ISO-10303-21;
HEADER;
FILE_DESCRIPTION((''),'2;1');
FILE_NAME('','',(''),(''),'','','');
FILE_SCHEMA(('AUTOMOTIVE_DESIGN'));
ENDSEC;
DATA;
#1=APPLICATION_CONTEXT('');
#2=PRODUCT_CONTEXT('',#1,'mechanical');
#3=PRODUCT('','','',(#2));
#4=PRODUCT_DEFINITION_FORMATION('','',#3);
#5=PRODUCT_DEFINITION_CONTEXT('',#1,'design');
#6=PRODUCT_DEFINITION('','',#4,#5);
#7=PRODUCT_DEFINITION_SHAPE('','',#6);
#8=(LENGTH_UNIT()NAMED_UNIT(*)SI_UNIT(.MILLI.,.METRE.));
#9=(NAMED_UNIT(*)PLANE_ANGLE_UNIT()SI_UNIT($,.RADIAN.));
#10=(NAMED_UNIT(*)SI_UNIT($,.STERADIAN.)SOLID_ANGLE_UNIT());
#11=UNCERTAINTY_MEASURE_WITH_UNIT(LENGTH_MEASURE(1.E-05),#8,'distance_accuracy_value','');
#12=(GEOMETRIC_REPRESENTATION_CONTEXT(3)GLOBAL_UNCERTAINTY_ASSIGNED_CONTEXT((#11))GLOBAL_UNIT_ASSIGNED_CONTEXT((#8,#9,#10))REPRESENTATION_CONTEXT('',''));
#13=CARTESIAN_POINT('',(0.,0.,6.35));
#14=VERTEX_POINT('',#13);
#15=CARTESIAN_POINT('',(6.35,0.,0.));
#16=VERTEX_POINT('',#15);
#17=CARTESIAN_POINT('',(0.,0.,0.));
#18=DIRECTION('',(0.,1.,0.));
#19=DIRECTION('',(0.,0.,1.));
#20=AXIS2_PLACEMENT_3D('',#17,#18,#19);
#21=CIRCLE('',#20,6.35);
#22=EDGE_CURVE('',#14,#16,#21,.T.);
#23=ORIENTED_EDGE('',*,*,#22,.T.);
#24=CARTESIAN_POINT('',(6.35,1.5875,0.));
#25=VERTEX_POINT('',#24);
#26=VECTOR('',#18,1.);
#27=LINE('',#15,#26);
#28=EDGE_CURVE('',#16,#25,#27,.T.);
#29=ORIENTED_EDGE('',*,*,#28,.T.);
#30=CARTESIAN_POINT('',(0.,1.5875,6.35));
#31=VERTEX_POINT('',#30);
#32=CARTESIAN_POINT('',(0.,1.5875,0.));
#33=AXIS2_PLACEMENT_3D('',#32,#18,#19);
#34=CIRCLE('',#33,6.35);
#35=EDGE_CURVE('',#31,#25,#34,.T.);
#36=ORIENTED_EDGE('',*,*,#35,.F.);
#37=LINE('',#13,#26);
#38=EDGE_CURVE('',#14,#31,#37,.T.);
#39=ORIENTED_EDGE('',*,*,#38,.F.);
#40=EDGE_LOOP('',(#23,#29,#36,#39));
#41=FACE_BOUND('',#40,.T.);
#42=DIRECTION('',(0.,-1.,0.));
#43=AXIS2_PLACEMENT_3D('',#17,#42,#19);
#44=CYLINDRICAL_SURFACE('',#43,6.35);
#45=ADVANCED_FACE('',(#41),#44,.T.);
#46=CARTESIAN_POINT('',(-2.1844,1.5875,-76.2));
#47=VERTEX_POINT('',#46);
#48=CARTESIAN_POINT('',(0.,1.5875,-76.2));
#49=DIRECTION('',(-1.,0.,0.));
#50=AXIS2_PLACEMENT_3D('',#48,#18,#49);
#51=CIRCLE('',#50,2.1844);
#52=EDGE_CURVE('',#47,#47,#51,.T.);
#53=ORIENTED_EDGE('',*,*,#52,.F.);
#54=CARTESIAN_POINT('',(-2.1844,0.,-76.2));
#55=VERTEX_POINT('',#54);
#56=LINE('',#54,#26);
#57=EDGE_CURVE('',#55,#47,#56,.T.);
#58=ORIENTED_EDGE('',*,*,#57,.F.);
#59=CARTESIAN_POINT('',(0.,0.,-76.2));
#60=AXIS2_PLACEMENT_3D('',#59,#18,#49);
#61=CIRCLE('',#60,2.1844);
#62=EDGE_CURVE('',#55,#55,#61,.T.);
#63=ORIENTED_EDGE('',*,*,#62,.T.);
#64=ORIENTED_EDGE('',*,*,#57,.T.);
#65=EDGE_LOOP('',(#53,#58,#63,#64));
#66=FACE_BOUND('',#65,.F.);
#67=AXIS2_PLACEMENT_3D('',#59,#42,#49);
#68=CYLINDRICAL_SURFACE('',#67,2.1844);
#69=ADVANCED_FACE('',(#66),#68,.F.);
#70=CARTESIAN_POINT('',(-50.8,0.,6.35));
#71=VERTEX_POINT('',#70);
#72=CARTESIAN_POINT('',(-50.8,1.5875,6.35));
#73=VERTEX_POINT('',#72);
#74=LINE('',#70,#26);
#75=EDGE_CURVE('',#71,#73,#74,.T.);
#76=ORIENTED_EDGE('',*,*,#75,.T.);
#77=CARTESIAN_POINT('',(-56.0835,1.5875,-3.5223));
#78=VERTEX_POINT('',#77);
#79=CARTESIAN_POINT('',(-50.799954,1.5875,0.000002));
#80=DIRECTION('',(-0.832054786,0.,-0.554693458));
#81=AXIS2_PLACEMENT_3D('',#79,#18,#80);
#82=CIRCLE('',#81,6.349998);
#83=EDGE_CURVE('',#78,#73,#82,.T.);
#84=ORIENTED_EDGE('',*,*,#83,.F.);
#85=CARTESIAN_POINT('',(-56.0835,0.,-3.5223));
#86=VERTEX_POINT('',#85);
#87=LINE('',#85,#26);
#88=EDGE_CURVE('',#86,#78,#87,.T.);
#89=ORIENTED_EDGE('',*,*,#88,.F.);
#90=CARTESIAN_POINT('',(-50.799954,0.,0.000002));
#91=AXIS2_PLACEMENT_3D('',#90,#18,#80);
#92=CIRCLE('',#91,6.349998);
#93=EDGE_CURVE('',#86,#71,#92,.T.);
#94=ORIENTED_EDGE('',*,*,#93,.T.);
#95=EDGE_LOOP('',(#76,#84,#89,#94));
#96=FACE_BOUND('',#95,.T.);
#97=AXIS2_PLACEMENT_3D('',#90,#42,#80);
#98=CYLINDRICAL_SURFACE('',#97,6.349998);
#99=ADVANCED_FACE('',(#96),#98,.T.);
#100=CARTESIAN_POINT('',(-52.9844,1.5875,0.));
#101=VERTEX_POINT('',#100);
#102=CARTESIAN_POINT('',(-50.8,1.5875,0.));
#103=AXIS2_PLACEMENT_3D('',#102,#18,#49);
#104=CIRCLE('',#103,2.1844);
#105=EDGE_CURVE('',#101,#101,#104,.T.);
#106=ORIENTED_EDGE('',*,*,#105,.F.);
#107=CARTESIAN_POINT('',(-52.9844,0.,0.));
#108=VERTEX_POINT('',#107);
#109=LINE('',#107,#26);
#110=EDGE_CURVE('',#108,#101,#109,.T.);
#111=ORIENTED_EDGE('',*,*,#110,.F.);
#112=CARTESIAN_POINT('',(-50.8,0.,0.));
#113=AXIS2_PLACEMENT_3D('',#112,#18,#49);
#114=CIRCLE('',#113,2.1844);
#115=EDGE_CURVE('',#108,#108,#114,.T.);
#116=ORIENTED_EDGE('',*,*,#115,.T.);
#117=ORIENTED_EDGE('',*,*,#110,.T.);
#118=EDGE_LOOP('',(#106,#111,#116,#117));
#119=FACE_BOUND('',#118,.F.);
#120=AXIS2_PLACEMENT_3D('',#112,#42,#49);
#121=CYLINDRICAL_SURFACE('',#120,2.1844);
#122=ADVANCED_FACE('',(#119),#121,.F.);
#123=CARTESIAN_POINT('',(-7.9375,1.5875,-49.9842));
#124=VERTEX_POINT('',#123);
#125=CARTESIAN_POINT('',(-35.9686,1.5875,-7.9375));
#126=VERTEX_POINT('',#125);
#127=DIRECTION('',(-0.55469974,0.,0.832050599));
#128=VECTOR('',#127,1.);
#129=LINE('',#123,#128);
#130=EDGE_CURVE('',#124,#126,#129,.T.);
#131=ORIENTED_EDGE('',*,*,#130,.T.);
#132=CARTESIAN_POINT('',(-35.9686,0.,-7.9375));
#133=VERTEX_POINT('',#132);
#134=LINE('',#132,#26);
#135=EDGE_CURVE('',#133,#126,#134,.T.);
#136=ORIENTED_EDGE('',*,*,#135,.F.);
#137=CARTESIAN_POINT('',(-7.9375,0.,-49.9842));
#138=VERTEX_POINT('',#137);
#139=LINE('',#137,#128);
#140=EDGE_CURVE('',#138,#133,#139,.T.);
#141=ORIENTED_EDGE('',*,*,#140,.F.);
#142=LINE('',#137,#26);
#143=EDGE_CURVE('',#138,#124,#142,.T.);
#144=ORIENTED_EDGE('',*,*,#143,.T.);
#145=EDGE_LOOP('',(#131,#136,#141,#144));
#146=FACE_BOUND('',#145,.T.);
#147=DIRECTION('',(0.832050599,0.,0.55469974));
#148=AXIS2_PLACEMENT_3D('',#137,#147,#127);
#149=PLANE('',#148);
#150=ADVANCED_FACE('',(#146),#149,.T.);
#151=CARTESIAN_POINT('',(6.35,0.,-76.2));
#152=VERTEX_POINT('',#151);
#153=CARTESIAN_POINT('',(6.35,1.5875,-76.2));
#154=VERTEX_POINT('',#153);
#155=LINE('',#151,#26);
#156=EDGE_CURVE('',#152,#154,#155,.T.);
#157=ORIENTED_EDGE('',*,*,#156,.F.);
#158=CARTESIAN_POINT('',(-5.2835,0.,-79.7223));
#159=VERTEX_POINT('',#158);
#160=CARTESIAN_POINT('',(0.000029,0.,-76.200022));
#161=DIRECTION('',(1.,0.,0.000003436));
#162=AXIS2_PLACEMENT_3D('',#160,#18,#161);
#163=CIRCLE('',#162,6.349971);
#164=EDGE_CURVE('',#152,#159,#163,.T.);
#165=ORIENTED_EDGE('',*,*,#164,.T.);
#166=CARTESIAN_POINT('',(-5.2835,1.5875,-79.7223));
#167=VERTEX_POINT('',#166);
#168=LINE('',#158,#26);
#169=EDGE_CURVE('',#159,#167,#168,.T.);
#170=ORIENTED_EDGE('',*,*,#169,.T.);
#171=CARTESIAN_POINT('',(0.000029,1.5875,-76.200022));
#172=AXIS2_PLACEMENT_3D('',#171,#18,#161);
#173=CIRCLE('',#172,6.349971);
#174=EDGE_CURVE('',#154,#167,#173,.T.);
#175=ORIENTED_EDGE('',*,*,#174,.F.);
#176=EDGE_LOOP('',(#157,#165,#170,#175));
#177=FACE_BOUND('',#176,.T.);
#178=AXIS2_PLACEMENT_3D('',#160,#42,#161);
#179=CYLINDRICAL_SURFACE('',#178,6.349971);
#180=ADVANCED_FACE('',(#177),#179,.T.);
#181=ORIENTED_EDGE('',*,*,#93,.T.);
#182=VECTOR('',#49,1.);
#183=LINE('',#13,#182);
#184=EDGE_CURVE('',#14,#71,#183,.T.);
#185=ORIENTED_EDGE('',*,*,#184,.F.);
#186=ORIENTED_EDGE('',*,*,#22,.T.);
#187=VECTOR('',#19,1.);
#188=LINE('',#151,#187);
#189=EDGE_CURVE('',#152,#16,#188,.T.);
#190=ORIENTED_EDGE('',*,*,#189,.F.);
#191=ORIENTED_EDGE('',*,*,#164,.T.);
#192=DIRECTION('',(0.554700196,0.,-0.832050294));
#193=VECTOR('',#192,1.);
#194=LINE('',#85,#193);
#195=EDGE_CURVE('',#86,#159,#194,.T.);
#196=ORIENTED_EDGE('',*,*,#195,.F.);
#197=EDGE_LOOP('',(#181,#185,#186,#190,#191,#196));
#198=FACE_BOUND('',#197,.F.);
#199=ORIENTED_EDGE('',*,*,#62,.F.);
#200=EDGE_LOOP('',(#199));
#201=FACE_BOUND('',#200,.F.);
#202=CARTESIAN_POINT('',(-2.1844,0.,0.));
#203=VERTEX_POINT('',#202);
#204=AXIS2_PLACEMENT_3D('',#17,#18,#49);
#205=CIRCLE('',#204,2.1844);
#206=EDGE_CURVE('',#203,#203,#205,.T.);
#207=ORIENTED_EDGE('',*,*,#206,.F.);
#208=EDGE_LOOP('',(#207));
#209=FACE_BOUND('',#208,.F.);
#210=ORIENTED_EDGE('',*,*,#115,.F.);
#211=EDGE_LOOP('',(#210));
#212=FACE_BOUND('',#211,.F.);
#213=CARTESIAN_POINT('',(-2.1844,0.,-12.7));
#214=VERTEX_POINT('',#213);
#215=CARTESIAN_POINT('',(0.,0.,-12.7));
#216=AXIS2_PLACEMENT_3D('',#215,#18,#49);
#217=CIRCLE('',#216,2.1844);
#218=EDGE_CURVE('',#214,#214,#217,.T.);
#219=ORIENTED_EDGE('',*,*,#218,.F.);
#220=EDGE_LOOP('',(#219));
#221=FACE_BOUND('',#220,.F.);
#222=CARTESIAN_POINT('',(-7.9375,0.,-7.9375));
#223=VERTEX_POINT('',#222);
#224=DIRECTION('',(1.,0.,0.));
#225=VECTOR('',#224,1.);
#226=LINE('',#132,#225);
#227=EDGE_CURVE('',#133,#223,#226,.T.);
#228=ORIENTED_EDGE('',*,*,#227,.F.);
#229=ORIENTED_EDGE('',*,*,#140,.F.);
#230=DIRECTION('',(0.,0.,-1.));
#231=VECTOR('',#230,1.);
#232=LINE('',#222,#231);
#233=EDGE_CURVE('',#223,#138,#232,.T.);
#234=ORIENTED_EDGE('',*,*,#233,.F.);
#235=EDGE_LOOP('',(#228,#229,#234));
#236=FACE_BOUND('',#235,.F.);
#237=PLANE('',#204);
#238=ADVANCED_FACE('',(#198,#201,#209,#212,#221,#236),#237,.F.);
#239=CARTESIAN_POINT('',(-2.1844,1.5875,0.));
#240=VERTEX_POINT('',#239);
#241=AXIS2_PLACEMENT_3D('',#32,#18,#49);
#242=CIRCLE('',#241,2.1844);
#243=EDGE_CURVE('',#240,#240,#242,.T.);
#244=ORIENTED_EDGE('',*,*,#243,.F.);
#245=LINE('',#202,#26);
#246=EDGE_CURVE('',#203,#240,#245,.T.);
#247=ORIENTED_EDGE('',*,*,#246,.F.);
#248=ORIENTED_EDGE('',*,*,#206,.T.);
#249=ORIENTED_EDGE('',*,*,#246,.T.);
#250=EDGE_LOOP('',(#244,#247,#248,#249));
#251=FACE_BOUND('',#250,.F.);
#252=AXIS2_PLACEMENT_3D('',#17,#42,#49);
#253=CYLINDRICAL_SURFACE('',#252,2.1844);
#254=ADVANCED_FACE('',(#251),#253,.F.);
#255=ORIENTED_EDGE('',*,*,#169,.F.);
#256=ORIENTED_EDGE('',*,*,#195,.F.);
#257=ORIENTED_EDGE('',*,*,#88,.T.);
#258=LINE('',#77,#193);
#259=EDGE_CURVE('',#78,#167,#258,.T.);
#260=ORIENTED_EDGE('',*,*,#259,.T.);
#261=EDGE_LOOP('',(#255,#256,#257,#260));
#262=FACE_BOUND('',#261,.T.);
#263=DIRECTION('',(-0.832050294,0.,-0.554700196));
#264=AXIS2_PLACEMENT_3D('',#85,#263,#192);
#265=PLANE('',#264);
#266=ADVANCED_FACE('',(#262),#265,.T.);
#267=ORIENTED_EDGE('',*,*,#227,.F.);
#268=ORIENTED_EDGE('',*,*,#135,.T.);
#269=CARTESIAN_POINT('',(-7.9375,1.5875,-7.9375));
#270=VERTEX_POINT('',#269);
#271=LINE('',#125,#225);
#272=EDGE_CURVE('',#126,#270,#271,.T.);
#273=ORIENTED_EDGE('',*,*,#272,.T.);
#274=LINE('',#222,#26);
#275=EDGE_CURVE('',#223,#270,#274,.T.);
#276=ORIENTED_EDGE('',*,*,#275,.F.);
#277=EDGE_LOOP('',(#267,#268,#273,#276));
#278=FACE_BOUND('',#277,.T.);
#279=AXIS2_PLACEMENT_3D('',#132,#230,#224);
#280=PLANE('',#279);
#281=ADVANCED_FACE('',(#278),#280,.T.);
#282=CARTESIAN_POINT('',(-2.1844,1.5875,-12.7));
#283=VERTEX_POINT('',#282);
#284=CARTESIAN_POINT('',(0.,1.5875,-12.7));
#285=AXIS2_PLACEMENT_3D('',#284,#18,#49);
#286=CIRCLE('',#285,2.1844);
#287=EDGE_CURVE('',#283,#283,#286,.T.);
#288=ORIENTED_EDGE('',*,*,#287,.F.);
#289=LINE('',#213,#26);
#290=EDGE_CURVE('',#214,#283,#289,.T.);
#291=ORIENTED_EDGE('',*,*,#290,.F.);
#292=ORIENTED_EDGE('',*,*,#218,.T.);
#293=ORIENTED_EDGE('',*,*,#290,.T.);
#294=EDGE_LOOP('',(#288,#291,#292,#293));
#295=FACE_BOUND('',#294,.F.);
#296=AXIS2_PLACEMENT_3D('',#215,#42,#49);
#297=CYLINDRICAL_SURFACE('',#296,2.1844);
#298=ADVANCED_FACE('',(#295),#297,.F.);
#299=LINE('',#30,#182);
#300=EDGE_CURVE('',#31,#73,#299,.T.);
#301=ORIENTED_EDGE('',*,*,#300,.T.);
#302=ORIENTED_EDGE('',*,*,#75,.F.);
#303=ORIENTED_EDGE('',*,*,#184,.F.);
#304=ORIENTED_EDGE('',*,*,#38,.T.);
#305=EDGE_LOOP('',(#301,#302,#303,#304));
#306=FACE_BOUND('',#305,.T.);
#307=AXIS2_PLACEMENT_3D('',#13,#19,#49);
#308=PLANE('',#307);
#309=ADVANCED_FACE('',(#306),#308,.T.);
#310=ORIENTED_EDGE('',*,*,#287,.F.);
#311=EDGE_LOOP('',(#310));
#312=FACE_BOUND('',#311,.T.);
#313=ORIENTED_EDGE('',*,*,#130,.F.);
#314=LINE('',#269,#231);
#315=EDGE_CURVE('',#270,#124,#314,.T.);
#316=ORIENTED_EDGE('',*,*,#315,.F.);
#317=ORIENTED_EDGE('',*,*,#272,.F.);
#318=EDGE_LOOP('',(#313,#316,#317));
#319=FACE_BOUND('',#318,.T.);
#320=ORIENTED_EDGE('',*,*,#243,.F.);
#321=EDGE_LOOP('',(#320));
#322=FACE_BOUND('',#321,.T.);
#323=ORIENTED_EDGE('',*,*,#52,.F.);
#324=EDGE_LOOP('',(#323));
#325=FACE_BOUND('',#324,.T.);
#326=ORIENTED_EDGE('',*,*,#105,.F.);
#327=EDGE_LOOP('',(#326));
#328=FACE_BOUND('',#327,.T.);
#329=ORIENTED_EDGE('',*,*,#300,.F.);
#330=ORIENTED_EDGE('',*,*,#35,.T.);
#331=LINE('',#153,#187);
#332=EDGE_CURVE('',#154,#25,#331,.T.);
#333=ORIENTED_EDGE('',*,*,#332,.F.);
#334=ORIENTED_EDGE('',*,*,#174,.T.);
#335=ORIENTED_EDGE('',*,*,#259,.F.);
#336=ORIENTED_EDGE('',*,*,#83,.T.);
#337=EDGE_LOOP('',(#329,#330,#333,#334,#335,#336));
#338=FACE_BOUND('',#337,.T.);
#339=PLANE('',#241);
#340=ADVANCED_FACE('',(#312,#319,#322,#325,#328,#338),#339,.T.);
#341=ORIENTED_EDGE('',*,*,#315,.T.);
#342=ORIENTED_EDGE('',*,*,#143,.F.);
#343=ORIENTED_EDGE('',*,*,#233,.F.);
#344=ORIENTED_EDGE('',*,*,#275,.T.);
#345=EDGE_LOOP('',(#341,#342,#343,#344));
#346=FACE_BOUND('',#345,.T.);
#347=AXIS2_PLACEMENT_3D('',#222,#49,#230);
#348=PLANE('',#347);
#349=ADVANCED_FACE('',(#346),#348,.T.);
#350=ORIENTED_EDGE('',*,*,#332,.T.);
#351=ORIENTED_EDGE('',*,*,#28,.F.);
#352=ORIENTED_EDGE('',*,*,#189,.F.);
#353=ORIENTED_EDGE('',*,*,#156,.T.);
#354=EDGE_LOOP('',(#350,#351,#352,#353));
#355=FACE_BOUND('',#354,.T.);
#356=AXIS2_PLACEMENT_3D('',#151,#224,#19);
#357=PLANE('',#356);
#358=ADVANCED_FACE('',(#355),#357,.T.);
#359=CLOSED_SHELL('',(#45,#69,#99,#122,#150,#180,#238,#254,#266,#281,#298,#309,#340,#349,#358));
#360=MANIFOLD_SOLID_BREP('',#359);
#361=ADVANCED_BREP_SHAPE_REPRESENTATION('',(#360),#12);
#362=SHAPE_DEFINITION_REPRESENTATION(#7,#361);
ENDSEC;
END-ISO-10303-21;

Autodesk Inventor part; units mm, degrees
ref_plane "YZ Plane" through (0, 0, 0) normal (1, 0, 0) x (0, 1, 0)
ref_plane "XZ Plane" through (0, 0, 0) normal (0, 1, 0) x (-1, 0, 0)
ref_plane "XY Plane" through (0, 0, 0) normal (0, 0, 1) x (1, 0, 0)
sketch "main" plane through (0, 0, 0) normal (0, 0, 1) x (1, 0, 0)
  circle A0 centre (-24.2926, 27.4457) radius 2.1844
  circle A1 centre (-24.2926, -48.7543) radius 2.1844
  circle A2 centre (26.5074, 27.4457) radius 2.1844
  arc A3 (-30.6426, -48.7543) -> (-19.0091, -52.2766) centre (-24.2926, -48.7543) ccw
  arc A4 (31.7909, 23.9234) -> (26.5074, 33.7957) centre (26.5074, 27.4457) ccw
  arc A5 (-24.2926, 33.7957) -> (-30.6426, 27.4457) centre (-24.2926, 27.4457) ccw
  line L0 (-30.6426, -48.7543) -> (-30.6426, 27.4457)
  line L1 (-24.2926, 33.7957) -> (26.5074, 33.7957)
  line L2 (31.7909, 23.9234) -> (-19.0091, -52.2766)
  line L3 (-16.3551, -22.5385) -> (11.6761, 19.5082)
  line L4 (11.6761, 19.5082) -> (-16.3551, 19.5082)
  line L5 (-16.3551, 19.5082) -> (-16.3551, -22.5385)
  circle A6 centre (-24.2926, 14.7457) radius 2.1844
  point P0 (-7.9432, 11.0963)
  dimension "d0" = 12.7
  dimension "d1" = 12.7
  dimension "d2" = 12.7
  dimension "d3" = 14.2875
  dimension "d6" = 4.3688
  dimension "d7" = 76.2
  dimension "d8" = 0
sketch "Sketch1" plane through (0, 0, 0) normal (0, 1, 0) x (-1, 0, 0)
  circle A0 centre (0, 0) radius 2.1844
  circle A1 centre (0, -76.2) radius 2.1844
  circle A2 centre (50.8, 0) radius 2.1844
  arc A3 (-6.35, -76.2) -> (5.2835, -79.7223) centre (0, -76.2) ccw
  arc A4 (56.0835, -3.5223) -> (50.8, 6.35) centre (50.8, 0) ccw
  arc A5 (0, 6.35) -> (-6.35, 0) centre (0, 0) ccw
  line L0 (-6.35, -76.2) -> (-6.35, 0)
  line L1 (0, 6.35) -> (50.8, 6.35)
  line L2 (56.0835, -3.5223) -> (5.2835, -79.7223)
  line L3 (7.9375, -49.9842) -> (35.9686, -7.9375)
  line L4 (35.9686, -7.9375) -> (7.9375, -7.9375)
  line L5 (7.9375, -7.9375) -> (7.9375, -49.9842)
  circle A6 centre (0, -12.7) radius 2.1844
extrude "Extrusion1" add sketch "Sketch1" along normal blind 1.5875
properties part number "Triangle Gusset" material "Acetal Resin, White"
